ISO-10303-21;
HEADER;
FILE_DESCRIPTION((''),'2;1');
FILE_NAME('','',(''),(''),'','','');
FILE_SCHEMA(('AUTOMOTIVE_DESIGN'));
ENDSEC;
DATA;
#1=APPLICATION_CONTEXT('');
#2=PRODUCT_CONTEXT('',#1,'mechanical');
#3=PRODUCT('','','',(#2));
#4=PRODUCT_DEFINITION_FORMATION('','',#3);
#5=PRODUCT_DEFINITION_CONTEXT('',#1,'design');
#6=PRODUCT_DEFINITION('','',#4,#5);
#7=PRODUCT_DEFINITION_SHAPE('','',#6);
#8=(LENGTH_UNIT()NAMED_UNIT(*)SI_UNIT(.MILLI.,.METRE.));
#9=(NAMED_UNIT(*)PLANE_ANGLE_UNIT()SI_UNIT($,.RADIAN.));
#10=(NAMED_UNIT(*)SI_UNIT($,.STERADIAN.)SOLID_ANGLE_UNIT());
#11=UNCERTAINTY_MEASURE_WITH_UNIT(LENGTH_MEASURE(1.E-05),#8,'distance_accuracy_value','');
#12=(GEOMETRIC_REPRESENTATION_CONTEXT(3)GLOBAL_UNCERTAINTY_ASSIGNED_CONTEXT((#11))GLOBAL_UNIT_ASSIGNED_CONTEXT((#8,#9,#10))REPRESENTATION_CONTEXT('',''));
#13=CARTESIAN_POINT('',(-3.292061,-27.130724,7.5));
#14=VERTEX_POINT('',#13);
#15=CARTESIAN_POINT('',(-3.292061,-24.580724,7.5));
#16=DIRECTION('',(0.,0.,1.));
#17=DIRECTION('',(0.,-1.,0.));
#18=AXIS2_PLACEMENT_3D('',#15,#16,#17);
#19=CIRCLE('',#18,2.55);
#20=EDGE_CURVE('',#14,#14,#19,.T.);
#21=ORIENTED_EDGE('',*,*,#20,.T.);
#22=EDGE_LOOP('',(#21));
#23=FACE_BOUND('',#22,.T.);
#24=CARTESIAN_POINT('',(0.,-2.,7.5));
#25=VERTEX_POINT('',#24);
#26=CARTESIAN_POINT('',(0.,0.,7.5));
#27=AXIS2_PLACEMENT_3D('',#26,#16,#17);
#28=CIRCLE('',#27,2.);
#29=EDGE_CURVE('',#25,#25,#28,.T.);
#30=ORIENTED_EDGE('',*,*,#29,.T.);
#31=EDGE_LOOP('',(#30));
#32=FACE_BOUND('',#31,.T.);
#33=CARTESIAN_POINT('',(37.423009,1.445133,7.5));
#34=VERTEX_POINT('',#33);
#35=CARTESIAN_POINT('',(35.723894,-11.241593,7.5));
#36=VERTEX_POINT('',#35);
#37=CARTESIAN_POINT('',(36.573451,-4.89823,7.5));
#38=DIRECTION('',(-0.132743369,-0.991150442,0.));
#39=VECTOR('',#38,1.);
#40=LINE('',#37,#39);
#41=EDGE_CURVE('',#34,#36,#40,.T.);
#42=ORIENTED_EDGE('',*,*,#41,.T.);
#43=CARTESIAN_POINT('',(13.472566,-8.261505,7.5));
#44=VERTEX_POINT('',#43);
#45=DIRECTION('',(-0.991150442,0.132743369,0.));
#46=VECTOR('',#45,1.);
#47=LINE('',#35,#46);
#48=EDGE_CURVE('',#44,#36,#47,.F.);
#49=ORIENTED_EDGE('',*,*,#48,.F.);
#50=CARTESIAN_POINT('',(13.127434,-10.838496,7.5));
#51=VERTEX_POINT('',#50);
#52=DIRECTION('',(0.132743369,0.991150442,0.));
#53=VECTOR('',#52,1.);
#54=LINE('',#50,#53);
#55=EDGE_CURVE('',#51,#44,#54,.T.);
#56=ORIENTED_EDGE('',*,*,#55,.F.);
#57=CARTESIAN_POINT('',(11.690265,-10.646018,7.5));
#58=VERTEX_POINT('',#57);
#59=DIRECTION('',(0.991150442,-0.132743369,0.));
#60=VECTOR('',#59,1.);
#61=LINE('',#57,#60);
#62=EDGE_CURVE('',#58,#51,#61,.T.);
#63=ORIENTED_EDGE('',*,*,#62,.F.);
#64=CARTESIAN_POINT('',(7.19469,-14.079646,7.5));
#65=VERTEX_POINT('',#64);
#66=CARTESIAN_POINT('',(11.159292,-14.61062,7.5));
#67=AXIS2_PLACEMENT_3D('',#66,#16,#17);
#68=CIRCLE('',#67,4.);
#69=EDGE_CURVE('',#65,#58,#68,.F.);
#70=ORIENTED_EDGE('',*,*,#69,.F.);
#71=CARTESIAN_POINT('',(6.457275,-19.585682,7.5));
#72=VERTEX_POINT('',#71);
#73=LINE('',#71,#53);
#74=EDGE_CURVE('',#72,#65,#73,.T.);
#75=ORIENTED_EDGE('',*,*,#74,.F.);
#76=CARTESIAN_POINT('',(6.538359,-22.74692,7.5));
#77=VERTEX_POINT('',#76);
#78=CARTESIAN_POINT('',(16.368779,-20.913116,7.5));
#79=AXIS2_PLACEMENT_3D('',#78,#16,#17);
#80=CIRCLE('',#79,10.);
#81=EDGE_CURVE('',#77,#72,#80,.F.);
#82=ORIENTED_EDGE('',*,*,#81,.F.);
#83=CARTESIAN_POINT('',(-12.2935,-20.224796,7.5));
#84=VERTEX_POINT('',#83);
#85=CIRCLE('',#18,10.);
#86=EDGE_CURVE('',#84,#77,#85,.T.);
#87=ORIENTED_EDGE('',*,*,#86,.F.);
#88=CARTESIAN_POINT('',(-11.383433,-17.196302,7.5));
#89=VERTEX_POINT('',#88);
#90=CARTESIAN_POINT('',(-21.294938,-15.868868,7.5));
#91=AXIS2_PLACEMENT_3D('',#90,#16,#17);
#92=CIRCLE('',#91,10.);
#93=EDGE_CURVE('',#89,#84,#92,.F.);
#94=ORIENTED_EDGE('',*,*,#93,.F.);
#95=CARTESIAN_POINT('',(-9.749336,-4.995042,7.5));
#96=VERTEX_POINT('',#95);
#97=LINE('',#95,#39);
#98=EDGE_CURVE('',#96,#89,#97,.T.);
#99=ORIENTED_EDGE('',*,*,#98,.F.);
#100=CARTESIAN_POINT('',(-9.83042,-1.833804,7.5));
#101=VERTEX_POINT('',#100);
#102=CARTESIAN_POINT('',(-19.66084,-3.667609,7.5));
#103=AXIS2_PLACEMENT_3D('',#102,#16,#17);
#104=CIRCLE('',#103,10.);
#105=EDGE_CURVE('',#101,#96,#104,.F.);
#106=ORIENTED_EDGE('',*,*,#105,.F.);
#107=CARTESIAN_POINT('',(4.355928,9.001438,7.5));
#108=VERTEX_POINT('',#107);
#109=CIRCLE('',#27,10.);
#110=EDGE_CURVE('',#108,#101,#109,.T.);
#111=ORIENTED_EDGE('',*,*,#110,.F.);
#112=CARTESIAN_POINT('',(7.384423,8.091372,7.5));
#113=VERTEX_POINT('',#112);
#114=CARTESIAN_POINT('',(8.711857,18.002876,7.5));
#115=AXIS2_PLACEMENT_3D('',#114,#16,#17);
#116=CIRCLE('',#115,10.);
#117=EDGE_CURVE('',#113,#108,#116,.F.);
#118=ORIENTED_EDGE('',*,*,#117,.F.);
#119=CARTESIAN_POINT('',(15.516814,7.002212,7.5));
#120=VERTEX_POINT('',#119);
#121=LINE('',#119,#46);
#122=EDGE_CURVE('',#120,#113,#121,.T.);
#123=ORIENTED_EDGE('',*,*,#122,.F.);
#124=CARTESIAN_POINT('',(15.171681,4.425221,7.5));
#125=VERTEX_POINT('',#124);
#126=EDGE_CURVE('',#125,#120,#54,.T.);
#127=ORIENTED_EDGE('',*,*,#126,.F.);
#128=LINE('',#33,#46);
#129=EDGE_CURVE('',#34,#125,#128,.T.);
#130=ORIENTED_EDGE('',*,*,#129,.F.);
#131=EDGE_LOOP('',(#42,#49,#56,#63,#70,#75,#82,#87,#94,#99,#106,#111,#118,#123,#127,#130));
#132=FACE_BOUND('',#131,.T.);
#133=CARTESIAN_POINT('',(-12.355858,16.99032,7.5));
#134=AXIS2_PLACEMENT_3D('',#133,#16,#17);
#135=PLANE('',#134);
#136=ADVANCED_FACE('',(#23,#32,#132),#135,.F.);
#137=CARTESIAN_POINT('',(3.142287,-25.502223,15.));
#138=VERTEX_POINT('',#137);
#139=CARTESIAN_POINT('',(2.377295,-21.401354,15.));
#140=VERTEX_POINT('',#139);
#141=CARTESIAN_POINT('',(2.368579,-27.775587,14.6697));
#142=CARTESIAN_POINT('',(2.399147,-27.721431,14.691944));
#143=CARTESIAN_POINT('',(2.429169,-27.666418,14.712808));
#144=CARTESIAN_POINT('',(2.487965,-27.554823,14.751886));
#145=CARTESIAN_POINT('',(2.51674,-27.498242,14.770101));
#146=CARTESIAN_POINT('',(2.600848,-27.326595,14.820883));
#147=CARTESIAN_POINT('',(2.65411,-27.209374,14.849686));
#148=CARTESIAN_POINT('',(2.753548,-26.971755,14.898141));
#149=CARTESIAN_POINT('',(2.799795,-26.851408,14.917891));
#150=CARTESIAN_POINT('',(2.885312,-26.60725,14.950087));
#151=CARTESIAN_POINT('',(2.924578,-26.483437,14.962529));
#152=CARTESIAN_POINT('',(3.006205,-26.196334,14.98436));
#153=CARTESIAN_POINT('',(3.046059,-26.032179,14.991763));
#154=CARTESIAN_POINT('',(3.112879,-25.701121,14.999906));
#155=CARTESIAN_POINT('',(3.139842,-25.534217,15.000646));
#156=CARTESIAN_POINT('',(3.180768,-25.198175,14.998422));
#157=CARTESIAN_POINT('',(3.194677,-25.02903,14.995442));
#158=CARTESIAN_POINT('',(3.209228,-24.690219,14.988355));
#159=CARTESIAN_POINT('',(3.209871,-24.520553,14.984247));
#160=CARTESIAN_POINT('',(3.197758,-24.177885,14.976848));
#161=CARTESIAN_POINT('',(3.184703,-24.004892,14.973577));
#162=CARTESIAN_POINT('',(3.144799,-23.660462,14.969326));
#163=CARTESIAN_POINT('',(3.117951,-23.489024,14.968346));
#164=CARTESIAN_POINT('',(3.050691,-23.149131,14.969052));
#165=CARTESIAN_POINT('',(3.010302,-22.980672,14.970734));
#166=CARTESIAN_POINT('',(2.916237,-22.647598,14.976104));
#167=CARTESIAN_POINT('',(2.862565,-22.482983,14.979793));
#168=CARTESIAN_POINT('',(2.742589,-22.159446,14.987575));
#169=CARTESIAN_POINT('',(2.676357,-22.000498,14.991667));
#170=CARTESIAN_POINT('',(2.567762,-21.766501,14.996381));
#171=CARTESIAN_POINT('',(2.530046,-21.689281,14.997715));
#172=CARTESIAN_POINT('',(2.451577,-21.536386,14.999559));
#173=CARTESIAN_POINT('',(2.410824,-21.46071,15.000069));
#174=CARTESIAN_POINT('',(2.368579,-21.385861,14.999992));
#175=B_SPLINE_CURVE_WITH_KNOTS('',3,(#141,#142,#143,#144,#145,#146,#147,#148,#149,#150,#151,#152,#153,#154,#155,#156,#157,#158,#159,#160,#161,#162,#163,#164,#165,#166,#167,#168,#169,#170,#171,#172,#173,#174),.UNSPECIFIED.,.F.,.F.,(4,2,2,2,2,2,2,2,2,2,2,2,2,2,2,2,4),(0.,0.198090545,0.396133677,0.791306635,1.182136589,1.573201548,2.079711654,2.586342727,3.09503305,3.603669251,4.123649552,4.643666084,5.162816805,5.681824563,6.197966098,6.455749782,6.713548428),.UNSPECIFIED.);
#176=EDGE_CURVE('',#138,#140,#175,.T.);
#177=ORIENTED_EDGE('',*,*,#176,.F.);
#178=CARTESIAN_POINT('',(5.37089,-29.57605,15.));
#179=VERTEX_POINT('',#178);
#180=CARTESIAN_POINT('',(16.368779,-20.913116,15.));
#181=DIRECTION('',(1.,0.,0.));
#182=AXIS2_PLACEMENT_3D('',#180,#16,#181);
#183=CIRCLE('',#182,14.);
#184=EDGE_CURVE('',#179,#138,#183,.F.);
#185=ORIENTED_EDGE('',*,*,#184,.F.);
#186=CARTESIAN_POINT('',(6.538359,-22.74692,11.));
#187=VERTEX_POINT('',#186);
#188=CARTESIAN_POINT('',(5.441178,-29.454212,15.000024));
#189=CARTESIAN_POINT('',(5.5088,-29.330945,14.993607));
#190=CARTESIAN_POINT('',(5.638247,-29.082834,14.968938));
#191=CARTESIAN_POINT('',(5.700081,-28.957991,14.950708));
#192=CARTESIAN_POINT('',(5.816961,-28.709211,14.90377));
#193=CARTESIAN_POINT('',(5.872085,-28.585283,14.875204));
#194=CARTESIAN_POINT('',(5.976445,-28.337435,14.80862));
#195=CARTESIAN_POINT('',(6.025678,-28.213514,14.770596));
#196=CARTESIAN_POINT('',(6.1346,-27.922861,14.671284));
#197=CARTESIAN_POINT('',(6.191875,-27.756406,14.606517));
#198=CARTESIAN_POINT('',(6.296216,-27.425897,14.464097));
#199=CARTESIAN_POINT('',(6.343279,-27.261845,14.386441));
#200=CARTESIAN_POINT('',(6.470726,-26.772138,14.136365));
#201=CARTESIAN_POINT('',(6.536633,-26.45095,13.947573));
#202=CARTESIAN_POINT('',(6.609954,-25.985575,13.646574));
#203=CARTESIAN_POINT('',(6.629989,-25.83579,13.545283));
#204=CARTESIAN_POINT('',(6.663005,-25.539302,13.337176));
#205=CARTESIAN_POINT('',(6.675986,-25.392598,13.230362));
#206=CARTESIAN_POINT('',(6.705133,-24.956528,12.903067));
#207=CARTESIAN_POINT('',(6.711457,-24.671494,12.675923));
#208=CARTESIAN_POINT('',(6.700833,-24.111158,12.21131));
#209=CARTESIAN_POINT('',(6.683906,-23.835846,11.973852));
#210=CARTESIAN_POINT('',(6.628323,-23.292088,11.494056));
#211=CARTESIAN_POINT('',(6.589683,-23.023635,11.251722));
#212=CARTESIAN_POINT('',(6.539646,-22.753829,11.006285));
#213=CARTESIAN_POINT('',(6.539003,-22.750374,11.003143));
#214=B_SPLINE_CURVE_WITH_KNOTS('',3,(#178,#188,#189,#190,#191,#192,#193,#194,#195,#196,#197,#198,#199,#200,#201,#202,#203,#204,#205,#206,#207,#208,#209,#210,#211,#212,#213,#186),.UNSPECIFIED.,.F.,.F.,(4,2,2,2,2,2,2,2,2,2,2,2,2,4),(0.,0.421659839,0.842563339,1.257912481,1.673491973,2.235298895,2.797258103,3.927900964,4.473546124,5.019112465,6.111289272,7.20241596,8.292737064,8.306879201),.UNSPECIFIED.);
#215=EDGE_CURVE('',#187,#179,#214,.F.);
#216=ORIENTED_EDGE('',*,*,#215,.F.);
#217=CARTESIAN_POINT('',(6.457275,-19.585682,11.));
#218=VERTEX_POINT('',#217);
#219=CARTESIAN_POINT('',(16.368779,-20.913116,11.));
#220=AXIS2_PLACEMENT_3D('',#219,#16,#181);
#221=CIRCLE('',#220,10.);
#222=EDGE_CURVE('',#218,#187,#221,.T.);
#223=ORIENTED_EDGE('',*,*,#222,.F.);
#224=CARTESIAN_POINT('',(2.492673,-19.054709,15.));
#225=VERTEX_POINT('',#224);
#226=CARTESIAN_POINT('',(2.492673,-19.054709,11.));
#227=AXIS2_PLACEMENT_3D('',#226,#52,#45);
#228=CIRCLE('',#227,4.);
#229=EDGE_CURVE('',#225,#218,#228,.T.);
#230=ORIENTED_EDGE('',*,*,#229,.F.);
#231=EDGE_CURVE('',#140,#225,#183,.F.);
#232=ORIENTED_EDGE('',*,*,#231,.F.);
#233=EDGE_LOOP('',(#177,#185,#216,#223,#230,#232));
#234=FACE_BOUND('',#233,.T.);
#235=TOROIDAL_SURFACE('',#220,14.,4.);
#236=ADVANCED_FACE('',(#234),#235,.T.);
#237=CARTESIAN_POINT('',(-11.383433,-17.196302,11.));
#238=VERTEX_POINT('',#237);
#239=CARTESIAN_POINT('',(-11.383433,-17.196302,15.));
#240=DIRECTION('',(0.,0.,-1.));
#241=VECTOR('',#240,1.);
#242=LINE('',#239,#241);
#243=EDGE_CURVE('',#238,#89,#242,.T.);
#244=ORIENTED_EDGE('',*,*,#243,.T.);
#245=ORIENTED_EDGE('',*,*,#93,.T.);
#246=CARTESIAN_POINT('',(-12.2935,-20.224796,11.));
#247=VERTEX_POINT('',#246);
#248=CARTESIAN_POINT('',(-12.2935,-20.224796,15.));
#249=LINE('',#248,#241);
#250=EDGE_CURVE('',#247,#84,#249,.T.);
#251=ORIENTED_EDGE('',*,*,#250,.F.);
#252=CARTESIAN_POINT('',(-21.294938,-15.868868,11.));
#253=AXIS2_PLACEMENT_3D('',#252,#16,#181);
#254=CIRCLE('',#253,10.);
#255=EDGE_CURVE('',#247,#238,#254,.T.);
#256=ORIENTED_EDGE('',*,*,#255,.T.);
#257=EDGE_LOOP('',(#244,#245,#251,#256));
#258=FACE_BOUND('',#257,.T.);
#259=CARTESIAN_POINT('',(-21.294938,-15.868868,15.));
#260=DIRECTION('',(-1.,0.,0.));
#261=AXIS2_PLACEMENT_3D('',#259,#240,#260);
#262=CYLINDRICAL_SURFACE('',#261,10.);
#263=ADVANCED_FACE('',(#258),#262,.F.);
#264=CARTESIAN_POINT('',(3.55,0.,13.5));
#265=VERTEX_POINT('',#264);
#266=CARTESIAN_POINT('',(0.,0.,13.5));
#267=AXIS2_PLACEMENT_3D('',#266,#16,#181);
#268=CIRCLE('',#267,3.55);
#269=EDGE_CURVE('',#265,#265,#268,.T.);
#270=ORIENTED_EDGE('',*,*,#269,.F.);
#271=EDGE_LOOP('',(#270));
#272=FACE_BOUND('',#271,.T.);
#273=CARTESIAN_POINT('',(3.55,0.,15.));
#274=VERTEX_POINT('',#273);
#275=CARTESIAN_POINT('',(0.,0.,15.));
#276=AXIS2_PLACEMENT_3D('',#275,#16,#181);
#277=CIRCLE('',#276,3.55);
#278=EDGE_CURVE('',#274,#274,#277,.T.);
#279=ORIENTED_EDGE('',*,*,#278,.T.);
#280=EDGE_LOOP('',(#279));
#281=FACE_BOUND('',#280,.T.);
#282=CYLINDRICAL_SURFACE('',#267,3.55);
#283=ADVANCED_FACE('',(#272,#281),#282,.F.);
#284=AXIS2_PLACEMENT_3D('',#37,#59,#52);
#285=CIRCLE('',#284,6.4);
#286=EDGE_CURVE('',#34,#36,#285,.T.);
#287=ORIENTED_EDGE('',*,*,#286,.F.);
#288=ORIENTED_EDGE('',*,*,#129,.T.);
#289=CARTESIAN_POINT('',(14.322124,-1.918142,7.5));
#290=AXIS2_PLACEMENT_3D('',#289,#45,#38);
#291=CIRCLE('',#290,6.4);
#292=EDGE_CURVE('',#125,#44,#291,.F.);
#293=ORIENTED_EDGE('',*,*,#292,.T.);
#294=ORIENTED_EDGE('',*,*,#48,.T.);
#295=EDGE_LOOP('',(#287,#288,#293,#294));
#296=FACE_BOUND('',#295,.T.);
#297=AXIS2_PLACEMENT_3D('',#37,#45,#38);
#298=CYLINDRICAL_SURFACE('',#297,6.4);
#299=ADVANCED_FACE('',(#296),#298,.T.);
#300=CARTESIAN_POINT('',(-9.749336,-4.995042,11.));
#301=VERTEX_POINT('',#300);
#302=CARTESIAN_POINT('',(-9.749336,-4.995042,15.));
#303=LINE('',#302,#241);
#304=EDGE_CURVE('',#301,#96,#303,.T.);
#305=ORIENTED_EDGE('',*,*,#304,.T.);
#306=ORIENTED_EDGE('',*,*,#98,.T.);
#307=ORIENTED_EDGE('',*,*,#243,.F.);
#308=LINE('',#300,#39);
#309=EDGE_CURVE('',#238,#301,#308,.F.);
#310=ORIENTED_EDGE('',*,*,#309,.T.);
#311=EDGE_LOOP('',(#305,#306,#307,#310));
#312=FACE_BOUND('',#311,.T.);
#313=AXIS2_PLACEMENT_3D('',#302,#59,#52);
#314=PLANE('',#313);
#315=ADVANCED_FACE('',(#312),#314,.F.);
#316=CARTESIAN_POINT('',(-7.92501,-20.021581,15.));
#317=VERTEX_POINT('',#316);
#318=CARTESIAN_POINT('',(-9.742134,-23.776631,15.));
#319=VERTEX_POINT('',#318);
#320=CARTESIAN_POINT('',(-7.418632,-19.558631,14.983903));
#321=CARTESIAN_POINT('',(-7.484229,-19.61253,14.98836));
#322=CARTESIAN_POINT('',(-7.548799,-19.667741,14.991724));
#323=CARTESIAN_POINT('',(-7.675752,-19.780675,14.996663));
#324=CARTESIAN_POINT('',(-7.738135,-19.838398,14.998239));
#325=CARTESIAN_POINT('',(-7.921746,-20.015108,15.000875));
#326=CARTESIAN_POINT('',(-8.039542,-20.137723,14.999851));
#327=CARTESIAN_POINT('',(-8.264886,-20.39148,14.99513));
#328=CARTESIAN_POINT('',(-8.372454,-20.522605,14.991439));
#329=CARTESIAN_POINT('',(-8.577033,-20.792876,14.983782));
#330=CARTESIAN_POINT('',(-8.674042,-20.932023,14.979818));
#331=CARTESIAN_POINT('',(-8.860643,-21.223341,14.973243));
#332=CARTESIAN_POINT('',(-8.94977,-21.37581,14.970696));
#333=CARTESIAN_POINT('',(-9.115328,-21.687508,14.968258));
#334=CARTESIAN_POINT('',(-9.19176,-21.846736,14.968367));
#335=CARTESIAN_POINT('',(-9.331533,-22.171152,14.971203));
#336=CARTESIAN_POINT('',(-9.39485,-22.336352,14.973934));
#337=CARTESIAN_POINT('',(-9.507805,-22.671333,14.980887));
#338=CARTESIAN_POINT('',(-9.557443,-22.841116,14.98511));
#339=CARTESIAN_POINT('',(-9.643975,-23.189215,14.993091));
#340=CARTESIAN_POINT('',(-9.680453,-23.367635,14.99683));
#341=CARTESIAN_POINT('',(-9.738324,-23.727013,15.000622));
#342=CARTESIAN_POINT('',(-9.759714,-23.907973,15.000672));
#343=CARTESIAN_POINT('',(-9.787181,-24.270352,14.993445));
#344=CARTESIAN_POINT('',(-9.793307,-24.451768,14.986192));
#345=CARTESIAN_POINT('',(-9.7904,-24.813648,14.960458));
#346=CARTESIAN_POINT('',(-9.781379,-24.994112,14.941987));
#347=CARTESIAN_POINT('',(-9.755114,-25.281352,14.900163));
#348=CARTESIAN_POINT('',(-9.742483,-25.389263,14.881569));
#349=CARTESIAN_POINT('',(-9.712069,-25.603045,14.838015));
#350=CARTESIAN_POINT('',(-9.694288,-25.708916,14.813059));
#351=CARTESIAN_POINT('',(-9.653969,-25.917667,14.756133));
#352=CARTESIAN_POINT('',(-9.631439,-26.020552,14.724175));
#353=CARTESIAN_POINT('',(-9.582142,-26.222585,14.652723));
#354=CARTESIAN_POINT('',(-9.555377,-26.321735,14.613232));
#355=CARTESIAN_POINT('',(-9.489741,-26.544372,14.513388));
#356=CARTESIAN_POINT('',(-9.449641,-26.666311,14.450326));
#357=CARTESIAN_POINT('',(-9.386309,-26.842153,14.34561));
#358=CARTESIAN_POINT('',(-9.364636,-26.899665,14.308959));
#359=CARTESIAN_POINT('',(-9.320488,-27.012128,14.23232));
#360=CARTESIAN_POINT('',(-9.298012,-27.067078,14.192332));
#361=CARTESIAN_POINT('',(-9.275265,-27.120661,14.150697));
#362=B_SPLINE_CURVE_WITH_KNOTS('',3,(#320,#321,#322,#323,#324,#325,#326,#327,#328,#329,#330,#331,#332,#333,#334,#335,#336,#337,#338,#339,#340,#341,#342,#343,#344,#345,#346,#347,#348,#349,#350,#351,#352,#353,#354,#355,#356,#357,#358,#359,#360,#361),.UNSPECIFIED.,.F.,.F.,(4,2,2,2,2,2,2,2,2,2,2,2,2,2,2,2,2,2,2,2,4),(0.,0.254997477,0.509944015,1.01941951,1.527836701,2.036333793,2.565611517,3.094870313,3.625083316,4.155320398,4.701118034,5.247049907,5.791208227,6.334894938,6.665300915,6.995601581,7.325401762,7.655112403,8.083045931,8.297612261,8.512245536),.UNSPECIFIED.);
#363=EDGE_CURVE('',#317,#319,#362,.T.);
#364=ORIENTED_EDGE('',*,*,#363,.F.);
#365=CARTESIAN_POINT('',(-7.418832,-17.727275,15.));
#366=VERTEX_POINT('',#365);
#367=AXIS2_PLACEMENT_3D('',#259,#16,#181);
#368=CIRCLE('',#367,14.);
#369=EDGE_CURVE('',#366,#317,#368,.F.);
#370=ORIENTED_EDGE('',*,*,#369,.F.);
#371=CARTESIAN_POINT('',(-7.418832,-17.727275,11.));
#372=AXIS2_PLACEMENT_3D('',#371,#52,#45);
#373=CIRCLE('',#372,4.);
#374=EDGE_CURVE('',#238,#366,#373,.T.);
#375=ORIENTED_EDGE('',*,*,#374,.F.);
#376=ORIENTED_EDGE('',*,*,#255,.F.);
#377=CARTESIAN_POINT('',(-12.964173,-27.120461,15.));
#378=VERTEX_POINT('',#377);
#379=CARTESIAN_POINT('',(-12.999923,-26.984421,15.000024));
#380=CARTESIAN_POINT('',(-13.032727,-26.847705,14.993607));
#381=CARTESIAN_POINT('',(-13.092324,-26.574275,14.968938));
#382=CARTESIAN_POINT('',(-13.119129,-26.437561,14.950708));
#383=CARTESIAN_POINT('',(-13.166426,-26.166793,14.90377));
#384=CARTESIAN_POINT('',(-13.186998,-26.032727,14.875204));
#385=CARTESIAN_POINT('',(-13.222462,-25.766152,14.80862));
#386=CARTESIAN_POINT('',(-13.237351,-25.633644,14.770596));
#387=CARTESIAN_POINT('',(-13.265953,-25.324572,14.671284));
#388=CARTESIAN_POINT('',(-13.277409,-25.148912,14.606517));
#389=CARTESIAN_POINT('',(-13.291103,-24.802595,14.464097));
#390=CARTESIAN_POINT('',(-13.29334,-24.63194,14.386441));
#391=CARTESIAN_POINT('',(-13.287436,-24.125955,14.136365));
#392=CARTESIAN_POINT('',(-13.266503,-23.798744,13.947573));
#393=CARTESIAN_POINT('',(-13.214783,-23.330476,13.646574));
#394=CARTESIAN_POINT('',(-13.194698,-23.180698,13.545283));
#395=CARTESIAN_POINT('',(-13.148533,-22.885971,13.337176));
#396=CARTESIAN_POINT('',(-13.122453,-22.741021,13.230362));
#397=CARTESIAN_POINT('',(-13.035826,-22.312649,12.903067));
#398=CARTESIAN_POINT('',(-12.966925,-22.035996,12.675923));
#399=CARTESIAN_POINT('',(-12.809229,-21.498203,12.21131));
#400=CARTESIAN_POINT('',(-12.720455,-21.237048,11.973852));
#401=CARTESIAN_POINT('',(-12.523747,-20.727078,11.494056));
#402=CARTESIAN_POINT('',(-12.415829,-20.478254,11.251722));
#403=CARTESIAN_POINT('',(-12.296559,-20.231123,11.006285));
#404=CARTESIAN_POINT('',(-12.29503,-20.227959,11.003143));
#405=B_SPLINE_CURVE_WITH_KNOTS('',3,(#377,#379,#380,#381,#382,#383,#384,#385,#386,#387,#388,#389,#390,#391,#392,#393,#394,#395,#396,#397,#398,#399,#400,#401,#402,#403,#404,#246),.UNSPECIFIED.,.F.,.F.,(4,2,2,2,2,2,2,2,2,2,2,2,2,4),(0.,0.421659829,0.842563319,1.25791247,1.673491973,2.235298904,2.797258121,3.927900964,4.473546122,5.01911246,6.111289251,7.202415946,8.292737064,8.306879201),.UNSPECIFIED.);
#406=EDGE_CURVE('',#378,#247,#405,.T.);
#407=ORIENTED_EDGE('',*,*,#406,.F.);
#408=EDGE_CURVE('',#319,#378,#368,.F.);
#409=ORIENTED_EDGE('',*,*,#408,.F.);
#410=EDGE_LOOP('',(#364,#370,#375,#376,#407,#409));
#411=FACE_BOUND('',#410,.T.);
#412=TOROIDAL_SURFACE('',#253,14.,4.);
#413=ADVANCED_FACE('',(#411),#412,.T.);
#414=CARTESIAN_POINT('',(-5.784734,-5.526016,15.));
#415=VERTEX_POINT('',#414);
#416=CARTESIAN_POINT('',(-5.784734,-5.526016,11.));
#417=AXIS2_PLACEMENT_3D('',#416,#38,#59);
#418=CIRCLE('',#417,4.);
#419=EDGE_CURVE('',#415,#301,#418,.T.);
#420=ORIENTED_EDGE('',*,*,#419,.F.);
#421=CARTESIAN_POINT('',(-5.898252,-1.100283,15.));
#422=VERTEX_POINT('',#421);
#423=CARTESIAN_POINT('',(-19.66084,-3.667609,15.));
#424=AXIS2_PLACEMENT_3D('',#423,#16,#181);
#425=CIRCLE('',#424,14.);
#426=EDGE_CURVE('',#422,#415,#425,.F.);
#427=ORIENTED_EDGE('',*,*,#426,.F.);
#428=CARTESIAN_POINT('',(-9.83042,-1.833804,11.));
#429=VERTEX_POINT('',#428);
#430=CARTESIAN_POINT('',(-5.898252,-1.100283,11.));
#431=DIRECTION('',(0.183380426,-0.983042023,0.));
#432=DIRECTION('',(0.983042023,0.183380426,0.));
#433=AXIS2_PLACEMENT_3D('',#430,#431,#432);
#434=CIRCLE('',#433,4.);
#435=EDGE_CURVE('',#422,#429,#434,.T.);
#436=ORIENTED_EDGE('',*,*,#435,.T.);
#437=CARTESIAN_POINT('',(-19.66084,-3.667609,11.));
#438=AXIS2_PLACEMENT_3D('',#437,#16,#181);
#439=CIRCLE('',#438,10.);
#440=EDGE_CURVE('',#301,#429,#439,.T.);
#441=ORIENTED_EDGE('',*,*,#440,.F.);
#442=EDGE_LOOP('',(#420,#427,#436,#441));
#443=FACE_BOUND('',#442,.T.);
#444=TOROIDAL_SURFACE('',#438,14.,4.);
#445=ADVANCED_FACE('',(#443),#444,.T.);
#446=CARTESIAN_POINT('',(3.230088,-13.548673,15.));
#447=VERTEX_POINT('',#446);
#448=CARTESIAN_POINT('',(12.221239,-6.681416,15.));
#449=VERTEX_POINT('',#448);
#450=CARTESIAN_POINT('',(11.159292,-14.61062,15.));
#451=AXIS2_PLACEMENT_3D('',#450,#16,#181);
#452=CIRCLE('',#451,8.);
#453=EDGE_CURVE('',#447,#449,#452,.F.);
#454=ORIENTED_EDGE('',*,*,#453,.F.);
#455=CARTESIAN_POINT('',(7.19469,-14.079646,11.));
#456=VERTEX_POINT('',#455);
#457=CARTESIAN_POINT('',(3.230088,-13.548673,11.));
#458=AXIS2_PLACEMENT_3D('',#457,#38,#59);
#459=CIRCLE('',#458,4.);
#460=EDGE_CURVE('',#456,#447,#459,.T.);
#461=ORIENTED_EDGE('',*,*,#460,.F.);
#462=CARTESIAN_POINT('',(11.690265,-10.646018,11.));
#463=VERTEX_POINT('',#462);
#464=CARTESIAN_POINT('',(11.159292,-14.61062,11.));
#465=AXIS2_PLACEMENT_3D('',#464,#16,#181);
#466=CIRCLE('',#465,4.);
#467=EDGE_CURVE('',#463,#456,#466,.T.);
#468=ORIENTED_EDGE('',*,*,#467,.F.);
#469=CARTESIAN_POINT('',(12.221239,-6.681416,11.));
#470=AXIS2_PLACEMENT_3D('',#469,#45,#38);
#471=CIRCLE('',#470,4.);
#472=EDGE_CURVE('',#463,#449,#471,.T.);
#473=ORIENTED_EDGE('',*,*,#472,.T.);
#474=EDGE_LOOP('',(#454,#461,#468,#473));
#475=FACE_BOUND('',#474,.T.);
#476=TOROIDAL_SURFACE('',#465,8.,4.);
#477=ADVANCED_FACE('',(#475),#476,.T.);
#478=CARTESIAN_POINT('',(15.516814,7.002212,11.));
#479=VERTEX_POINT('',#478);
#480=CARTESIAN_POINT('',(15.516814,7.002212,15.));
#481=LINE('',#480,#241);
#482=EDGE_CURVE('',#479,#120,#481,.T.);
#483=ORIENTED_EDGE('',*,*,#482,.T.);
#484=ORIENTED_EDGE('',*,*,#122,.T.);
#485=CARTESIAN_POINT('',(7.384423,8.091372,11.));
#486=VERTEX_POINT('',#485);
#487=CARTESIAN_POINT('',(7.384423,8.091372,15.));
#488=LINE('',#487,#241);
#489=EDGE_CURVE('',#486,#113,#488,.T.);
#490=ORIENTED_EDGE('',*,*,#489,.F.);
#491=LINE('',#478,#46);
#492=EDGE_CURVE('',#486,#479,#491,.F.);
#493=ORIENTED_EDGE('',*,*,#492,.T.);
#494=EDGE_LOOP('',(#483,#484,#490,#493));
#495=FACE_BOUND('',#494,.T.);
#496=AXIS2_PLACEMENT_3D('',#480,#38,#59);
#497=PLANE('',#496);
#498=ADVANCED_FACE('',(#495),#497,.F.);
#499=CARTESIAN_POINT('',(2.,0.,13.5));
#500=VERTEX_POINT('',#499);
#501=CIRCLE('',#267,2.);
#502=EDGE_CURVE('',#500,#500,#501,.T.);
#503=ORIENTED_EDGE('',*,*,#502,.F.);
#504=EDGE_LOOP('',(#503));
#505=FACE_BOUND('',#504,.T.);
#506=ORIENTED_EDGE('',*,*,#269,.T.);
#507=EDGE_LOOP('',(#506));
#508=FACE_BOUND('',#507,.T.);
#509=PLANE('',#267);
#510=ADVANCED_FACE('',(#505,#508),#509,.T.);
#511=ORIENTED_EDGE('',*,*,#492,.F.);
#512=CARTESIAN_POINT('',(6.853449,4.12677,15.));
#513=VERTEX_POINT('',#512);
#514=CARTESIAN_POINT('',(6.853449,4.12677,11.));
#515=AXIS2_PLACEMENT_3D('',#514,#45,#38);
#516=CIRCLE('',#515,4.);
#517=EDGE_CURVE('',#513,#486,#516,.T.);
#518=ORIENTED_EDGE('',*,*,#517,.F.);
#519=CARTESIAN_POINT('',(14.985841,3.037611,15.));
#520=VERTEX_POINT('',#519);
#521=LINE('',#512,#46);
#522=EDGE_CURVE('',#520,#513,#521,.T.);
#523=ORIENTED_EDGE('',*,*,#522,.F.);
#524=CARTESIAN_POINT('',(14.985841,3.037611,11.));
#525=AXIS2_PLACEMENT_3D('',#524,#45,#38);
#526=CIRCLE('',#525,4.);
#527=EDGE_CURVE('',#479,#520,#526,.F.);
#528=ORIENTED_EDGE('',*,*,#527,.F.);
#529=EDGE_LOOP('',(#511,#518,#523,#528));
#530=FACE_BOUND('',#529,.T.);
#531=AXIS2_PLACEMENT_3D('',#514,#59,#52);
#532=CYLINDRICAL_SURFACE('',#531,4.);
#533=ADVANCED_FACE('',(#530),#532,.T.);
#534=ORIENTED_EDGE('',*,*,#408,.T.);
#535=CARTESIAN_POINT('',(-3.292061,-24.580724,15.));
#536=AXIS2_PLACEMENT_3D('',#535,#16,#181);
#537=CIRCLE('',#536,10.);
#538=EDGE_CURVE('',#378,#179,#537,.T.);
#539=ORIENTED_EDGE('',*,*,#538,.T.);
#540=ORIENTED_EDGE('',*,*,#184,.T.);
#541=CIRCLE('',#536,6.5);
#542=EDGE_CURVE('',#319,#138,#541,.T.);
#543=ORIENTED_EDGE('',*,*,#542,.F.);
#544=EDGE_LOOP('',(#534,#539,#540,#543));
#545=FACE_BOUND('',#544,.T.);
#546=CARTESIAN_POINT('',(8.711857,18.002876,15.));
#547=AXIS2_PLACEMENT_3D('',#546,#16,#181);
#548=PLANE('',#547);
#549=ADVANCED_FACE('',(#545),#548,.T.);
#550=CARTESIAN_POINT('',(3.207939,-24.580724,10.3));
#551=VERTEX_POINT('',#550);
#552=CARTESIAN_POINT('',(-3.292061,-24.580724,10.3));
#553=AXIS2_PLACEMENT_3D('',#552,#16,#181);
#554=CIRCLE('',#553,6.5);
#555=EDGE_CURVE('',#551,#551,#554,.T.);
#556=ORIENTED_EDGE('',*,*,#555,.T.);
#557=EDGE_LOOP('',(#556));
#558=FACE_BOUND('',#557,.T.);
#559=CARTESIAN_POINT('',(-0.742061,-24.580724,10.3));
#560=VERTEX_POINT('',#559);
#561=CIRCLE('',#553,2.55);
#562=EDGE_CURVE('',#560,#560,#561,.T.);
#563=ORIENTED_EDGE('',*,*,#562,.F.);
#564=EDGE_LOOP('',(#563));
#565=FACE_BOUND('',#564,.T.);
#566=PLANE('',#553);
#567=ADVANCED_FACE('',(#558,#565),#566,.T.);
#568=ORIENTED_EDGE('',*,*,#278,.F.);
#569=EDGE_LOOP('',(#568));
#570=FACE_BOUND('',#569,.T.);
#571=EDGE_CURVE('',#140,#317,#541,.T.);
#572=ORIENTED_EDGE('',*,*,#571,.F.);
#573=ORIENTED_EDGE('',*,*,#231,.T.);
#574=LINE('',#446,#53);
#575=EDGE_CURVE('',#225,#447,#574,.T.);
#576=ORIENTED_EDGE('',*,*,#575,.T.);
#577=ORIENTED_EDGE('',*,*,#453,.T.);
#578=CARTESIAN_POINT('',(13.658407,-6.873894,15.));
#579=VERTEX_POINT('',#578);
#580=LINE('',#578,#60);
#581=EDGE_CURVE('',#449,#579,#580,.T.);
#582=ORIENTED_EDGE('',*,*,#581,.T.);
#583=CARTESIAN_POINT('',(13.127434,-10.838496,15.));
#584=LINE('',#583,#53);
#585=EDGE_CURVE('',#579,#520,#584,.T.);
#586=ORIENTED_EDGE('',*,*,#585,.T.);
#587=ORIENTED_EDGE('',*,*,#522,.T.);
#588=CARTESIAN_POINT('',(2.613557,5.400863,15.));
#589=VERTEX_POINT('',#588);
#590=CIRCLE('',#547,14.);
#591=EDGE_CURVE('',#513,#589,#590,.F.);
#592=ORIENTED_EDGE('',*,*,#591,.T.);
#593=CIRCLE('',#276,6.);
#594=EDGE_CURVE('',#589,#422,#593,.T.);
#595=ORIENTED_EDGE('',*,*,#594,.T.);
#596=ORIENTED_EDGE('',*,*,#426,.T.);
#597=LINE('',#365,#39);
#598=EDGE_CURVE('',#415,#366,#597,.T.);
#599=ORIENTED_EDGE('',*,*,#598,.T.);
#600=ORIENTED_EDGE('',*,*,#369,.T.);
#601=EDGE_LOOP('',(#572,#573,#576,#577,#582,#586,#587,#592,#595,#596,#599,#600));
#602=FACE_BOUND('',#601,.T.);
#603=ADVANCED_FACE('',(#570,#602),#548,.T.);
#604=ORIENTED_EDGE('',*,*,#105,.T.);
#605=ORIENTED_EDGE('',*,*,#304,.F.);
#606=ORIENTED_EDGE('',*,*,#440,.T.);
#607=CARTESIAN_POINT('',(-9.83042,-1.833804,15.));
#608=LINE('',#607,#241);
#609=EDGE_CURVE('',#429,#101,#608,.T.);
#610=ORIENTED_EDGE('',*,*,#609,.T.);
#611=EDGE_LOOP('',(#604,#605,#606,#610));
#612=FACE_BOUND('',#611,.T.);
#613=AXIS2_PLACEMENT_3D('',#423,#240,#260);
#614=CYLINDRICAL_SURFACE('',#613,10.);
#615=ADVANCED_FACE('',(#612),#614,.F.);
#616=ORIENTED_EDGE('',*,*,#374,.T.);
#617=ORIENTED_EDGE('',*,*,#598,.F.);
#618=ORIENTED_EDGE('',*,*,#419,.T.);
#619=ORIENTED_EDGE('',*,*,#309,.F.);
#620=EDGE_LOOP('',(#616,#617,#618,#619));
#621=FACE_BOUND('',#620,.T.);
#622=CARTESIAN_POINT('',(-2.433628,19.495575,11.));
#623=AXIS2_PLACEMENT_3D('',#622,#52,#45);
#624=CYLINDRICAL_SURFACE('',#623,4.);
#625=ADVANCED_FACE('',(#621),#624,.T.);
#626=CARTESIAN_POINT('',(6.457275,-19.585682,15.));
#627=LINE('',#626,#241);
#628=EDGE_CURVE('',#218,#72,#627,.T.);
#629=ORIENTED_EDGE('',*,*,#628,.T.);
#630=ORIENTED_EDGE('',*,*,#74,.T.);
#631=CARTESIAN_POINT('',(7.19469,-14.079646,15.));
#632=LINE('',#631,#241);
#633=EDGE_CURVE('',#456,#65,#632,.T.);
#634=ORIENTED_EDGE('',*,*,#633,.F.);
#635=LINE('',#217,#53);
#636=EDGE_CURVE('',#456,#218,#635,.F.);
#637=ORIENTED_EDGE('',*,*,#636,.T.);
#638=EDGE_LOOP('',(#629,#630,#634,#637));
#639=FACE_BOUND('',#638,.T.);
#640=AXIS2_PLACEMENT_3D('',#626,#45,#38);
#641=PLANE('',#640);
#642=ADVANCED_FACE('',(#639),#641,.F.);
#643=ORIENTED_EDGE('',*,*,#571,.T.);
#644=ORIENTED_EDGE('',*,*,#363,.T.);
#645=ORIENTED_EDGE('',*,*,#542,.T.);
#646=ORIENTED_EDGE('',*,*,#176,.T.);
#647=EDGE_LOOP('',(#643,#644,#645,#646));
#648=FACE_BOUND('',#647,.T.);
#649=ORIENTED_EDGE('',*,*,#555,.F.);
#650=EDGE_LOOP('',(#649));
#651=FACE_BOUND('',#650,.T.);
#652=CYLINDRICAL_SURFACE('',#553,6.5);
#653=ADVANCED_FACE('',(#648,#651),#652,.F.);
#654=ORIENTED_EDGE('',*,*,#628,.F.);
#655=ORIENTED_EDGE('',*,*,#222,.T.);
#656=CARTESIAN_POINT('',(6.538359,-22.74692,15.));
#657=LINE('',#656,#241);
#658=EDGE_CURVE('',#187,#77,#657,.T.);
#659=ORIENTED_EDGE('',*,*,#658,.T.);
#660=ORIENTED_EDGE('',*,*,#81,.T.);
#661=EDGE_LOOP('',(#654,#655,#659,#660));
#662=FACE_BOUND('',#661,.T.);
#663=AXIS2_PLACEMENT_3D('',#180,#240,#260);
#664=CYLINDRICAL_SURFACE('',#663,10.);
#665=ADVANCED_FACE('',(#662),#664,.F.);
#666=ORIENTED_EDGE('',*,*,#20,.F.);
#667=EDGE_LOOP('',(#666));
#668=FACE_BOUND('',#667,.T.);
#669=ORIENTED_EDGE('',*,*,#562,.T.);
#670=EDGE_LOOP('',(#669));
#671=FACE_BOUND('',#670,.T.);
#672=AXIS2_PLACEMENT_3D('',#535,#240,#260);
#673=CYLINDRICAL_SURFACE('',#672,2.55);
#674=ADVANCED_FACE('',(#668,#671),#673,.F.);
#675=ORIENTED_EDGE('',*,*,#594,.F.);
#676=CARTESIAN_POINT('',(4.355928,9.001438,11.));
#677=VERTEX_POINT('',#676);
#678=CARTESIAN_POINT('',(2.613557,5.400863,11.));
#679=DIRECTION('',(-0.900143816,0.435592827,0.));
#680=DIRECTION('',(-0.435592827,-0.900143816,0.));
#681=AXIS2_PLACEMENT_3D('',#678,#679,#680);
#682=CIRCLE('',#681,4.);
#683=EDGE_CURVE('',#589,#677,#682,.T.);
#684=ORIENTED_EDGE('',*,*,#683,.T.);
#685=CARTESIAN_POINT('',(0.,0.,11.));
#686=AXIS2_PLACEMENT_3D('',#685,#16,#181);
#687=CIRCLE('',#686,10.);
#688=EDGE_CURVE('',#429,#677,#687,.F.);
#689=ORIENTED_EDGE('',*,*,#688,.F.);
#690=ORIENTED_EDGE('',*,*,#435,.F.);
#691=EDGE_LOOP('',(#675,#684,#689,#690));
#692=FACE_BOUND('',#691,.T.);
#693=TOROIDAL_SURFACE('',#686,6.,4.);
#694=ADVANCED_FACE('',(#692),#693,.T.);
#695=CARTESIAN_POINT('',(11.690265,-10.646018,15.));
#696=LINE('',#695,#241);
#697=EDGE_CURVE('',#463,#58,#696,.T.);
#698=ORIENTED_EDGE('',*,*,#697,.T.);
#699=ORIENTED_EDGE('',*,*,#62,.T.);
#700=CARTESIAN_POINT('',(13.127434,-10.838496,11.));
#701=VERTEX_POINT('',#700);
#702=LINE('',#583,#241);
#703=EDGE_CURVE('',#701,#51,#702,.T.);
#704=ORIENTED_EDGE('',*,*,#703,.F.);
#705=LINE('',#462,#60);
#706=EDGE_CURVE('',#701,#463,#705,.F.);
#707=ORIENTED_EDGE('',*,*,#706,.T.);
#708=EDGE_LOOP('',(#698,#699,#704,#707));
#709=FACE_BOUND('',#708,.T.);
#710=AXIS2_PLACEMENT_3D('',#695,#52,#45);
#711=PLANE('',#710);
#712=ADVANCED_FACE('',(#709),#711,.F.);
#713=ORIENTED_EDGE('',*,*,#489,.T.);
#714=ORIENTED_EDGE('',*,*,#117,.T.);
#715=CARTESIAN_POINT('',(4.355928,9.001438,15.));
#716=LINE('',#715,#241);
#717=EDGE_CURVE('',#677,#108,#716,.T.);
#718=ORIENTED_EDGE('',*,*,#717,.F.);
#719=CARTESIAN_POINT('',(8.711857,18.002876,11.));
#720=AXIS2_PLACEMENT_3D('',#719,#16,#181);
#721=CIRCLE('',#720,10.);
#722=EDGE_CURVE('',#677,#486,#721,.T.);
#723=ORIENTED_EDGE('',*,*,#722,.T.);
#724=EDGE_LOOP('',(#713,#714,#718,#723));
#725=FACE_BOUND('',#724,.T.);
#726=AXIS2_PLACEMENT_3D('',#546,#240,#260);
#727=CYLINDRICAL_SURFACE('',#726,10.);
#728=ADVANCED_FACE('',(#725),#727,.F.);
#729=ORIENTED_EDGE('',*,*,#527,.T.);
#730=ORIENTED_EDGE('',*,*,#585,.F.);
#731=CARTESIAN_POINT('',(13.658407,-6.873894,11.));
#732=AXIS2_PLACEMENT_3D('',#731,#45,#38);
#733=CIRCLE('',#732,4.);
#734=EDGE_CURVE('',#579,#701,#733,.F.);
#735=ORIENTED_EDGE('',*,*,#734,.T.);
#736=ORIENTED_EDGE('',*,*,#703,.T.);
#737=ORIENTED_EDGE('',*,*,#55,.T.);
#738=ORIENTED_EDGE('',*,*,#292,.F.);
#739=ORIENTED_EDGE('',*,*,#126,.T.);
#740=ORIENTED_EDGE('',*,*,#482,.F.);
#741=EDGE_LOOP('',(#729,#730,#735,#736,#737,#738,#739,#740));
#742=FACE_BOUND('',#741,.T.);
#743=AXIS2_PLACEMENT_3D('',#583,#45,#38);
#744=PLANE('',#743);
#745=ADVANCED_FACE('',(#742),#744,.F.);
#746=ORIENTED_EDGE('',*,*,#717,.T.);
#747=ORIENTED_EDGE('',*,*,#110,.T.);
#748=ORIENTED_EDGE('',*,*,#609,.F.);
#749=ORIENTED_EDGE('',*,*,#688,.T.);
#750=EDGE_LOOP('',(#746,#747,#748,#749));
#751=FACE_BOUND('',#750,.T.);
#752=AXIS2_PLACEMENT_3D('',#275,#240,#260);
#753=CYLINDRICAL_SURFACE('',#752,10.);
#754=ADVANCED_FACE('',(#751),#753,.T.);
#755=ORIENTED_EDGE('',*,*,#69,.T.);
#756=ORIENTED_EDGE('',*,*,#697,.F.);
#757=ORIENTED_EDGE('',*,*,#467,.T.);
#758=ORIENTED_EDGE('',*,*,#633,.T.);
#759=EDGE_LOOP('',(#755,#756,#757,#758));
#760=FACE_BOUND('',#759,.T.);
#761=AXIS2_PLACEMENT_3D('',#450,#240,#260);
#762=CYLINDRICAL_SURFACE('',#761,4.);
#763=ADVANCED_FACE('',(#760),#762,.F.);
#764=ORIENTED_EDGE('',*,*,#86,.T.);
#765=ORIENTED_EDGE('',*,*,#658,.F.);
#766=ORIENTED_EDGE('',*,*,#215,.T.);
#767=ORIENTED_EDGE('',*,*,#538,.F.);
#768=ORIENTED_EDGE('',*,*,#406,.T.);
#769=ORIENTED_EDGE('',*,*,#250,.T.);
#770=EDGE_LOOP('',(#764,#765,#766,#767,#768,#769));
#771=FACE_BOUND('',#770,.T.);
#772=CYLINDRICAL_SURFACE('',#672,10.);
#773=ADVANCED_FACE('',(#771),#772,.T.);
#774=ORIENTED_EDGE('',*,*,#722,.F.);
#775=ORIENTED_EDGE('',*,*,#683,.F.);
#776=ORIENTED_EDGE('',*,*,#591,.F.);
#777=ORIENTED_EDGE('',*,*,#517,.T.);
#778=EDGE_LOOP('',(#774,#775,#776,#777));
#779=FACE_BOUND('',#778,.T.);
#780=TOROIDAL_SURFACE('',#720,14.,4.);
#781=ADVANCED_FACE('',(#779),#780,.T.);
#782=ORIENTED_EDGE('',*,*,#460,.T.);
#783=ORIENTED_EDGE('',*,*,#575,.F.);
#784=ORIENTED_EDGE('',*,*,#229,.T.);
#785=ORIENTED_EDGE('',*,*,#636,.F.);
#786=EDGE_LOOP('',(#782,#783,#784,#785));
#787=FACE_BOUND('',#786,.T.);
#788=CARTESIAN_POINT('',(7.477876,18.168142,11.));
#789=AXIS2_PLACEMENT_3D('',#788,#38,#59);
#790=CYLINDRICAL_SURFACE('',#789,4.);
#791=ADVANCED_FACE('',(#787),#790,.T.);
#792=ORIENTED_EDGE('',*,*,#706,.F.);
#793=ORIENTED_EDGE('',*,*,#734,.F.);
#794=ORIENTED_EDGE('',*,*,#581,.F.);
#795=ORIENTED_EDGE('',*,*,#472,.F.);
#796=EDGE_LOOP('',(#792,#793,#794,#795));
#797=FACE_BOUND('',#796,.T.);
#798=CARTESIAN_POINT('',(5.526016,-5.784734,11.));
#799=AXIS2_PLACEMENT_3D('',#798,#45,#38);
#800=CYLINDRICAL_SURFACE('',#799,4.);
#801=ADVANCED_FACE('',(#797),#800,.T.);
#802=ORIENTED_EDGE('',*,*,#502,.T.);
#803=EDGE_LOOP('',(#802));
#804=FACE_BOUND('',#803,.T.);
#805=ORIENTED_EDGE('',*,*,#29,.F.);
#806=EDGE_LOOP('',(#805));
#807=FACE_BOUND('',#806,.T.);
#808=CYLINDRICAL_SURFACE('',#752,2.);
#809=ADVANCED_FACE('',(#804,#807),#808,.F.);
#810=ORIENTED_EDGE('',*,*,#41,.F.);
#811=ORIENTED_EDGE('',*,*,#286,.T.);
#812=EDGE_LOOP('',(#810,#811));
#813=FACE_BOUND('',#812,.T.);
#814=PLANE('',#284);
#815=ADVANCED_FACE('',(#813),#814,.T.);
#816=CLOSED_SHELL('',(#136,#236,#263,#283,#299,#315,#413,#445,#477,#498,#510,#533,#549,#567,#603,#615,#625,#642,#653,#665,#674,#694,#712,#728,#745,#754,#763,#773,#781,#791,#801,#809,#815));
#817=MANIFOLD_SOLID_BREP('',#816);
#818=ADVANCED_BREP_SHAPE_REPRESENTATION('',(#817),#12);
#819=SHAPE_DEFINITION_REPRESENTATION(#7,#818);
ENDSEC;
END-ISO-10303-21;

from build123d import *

# Parameters (mm, degrees)
SKETCH_5_R          = 2
SKETCH_5_R_2        = 2.55
EXTRUDE_3_DEPTH     = 15
FILLET_4_R          = 4
SKETCH_6_R          = 6.4
EXTRUDE_4_DEPTH     = 22.45
SKETCH_7_R          = 6.5
CUT_EXTRUDE_1_DEPTH = 4.7
CUT_EXTRUDE_START   = -4.7
SKETCH_8_R          = 6.5
CUT_EXTRUDE_2_DEPTH = 4.7
SKETCH_9_W          = 7.5
SKETCH_9_H          = 50
CUT_EXTRUDE_3_DEPTH = 60.938467095
SKETCH_10_R         = 3.55
CUT_EXTRUDE_4_DEPTH = 1.5


with BuildPart() as part:
    # 草图5 → 凸台-拉伸3 (new body)
    with BuildSketch(Plane.XY):
        with BuildLine():
            Line((15.516814201, 7.002212297), (7.384422843, 8.091371903))
            ThreePointArc((7.384422843, 8.091371903), (5.833974337, 8.425935573), (4.355928265, 9.00143816))
            ThreePointArc((4.355928265, 9.00143816), (-6.069854623, 7.947129347), (-9.830420232, -1.833804259))
            ThreePointArc((-9.830420232, -1.833804259), (-9.664128327, -3.411197812), (-9.749336047, -4.995042206))
            Line((-9.749336047, -4.995042206), (-11.383433357, -17.196301568))
            ThreePointArc((-11.383433357, -17.196301568), (-11.717997026, -18.746750074), (-12.293499614, -20.224796146))
            ThreePointArc((-12.293499614, -20.224796146), (-4.619495141, -34.492228828), (6.538358778, -22.746920152))
            ThreePointArc((6.538358778, -22.746920152), (6.372066873, -21.169526599), (6.457274593, -19.585682205))
            Line((6.457274593, -19.585682205), (7.194690182, -14.07964606))
            ThreePointArc((7.194690182, -14.07964606), (8.731350099, -11.431767797), (11.690265423, -10.646017769))
            Line((11.690265423, -10.646017769), (13.127433564, -10.838495653))
            Line((13.127433564, -10.838495653), (15.516814201, 7.002212297))
        make_face()
        Circle(SKETCH_5_R, mode=Mode.SUBTRACT)
        with Locations((-3.292061454, -24.580724411)):
            Circle(SKETCH_5_R_2, mode=Mode.SUBTRACT)
    extrude(amount=EXTRUDE_3_DEPTH)

    # 圆角4
    # the kernel refuses this fillet: 4 mm, written as the material it takes off along each edge
    with BuildSketch(Plane(origin=(-19.660840464, -3.667608519, 15), x_dir=(0.9830420232040514, 0.18338042593168238, 0), z_dir=(-0.18338042593168238, 0.9830420232040514, 0))) as fillet_4_piece_1:
        with BuildLine():
            CenterArc((10 + FILLET_4_R, FILLET_4_R), FILLET_4_R, 180, 90)
            Line((10 + FILLET_4_R, 0), (10, 0))
            Line((10, 0), (10, FILLET_4_R))
        make_face()
    revolve(axis=Axis((-19.660840464, -3.667608519, 15), (0, 0, -1)), revolution_arc=18.194872339, mode=Mode.SUBTRACT)
    with BuildSketch(Plane(origin=(25.428318618, 5.67477861, 0), x_dir=(0, 0, 1), z_dir=(-0.9911504416884656, 0.132743368726124, 0))) as fillet_4_piece_2:
        with BuildLine():
            CenterArc((FILLET_4_R, -FILLET_4_R), FILLET_4_R, 90, 90)
            Line((0, -FILLET_4_R), (0, 0))
            Line((0, 0), (FILLET_4_R, 0))
        make_face()
    extrude(amount=18.205002002, mode=Mode.SUBTRACT)
    with BuildSketch(Plane(origin=(11.690265423, -10.646017769, 0), x_dir=(0, 0, 1), z_dir=(0.9911504416883519, -0.13274336872697298, 0))) as fillet_4_piece_3:
        with BuildLine():
            CenterArc((FILLET_4_R, -FILLET_4_R), FILLET_4_R, 90, 90)
            Line((0, -FILLET_4_R), (0, 0))
            Line((0, 0), (FILLET_4_R, 0))
        make_face()
    extrude(amount=11.45, mode=Mode.SUBTRACT)
    with BuildSketch(Plane(origin=(11.159291948, -14.610619535, 0), x_dir=(-0.9911504416882816, 0.13274336872749704, 0), z_dir=(-0.13274336872749704, -0.9911504416882816, 0))) as fillet_4_piece_4:
        with BuildLine():
            CenterArc((4 + FILLET_4_R, -FILLET_4_R), FILLET_4_R, 90, 90)
            Line((4 + FILLET_4_R, 0), (4, 0))
            Line((4, 0), (4, -FILLET_4_R))
        make_face()
    revolve(axis=Axis((11.159291948, -14.610619535, 0), (0, 0, -1)), revolution_arc=90, mode=Mode.SUBTRACT)
    with BuildSketch(Plane(origin=(6.457274593, -19.585682205, 0), x_dir=(0, 0, 1), z_dir=(0.13274336872730183, 0.9911504416883078, 0))) as fillet_4_piece_5:
        with BuildLine():
            CenterArc((FILLET_4_R, -FILLET_4_R), FILLET_4_R, 90, 90)
            Line((0, -FILLET_4_R), (0, 0))
            Line((0, 0), (FILLET_4_R, 0))
        make_face()
    extrude(amount=5.555197186, mode=Mode.SUBTRACT)
    with BuildSketch(Plane(origin=(16.368779012, -20.913115892, 0), x_dir=(-0.3768153606688204, -0.9262883913576953, 0), z_dir=(0.9262883913576953, -0.3768153606688204, 0))) as fillet_4_piece_6:
        with BuildLine():
            CenterArc((10.000000001 + FILLET_4_R, -FILLET_4_R), FILLET_4_R, 90, 90)
            Line((10.000000001 + FILLET_4_R, 0), (10.000000001, 0))
            Line((10.000000001, 0), (10.000000001, -FILLET_4_R))
        make_face()
    revolve(axis=Axis((16.368779012, -20.913115892, 0), (0, 0, -1)), revolution_arc=75.491592277, mode=Mode.SUBTRACT)
    with BuildSketch(Plane(origin=(-9.749336047, -4.995042206, 15), x_dir=(0, 0, -1), z_dir=(-0.13274336872713738, -0.9911504416883298, 0))) as fillet_4_piece_7:
        with BuildLine():
            CenterArc((FILLET_4_R, FILLET_4_R), FILLET_4_R, 180, 90)
            Line((0, FILLET_4_R), (0, 0))
            Line((0, 0), (FILLET_4_R, 0))
        make_face()
    extrude(amount=12.310199188, mode=Mode.SUBTRACT)
    with BuildSketch(Plane(origin=(-21.294937774, -15.868867881, 0), x_dir=(0.9911504416879034, -0.132743368730321, 0), z_dir=(0.132743368730321, 0.9911504416879034, 0))) as fillet_4_piece_8:
        with BuildLine():
            CenterArc((10 + FILLET_4_R, -FILLET_4_R), FILLET_4_R, 90, 90)
            Line((10 + FILLET_4_R, 0), (10, 0))
            Line((10, 0), (10, -FILLET_4_R))
        make_face()
    revolve(axis=Axis((-21.294937774, -15.868867881, 0), (0, 0, -1)), revolution_arc=75.491592288, mode=Mode.SUBTRACT)
    with BuildSketch(Plane(origin=(-9.749336047, -4.995042206, 0), x_dir=(0, 0, 1), z_dir=(-0.13274336872713738, -0.9911504416883298, 0))) as fillet_4_piece_9:
        with BuildLine():
            CenterArc((FILLET_4_R, -FILLET_4_R), FILLET_4_R, 90, 90)
            Line((0, -FILLET_4_R), (0, 0))
            Line((0, 0), (FILLET_4_R, 0))
        make_face()
    extrude(amount=12.310199188, mode=Mode.SUBTRACT)
    with BuildSketch(Plane(origin=(-19.660840464, -3.667608519, 0), x_dir=(0.9830420232040514, 0.18338042593168238, 0), z_dir=(-0.18338042593168238, 0.9830420232040514, 0))) as fillet_4_piece_10:
        with BuildLine():
            CenterArc((10 + FILLET_4_R, -FILLET_4_R), FILLET_4_R, 90, 90)
            Line((10 + FILLET_4_R, 0), (10, 0))
            Line((10, 0), (10, -FILLET_4_R))
        make_face()
    revolve(axis=Axis((-19.660840464, -3.667608519, 0), (0, 0, -1)), revolution_arc=18.194872339, mode=Mode.SUBTRACT)
    with BuildSketch(Plane(origin=(0, 0, 0), x_dir=(0.43559282651439474, 0.900143816003421, 0), z_dir=(0.900143816003421, -0.43559282651439474, 0))) as fillet_4_piece_11:
        with BuildLine():
            CenterArc((10 - FILLET_4_R, FILLET_4_R), FILLET_4_R, 270, 90)
            Line((10 - FILLET_4_R, 0), (10, 0))
            Line((10, 0), (10, FILLET_4_R))
        make_face()
    revolve(axis=Axis((0, 0, 0), (0, 0, 1)), revolution_arc=126.389744678, mode=Mode.SUBTRACT)
    with BuildSketch(Plane(origin=(8.71185653, 18.00287632, 0), x_dir=(-0.13274336873032264, -0.9911504416879031, 0), z_dir=(0.9911504416879031, -0.13274336873032264, 0))) as fillet_4_piece_12:
        with BuildLine():
            CenterArc((10 + FILLET_4_R, -FILLET_4_R), FILLET_4_R, 90, 90)
            Line((10 + FILLET_4_R, 0), (10, 0))
            Line((10, 0), (10, -FILLET_4_R))
        make_face()
    revolve(axis=Axis((8.71185653, 18.00287632, 0), (0, 0, -1)), revolution_arc=18.194872339, mode=Mode.SUBTRACT)
    with BuildSketch(Plane(origin=(-21.294937774, -15.868867881, 15), x_dir=(0.9911504416879034, -0.132743368730321, 0), z_dir=(0.132743368730321, 0.9911504416879034, 0))) as fillet_4_piece_13:
        with BuildLine():
            CenterArc((10 + FILLET_4_R, FILLET_4_R), FILLET_4_R, 180, 90)
            Line((10 + FILLET_4_R, 0), (10, 0))
            Line((10, 0), (10, FILLET_4_R))
        make_face()
    revolve(axis=Axis((-21.294937774, -15.868867881, 15), (0, 0, -1)), revolution_arc=75.491592288, mode=Mode.SUBTRACT)
    with BuildSketch(Plane(origin=(16.368779012, -20.913115892, 15), x_dir=(-0.3768153606688204, -0.9262883913576953, 0), z_dir=(0.9262883913576953, -0.3768153606688204, 0))) as fillet_4_piece_14:
        with BuildLine():
            CenterArc((10.000000001 + FILLET_4_R, FILLET_4_R), FILLET_4_R, 180, 90)
            Line((10.000000001 + FILLET_4_R, 0), (10.000000001, 0))
            Line((10.000000001, 0), (10.000000001, FILLET_4_R))
        make_face()
    revolve(axis=Axis((16.368779012, -20.913115892, 15), (0, 0, -1)), revolution_arc=75.491592277, mode=Mode.SUBTRACT)
    with BuildSketch(Plane(origin=(6.457274593, -19.585682205, 15), x_dir=(0, 0, -1), z_dir=(0.13274336872730183, 0.9911504416883078, 0))) as fillet_4_piece_15:
        with BuildLine():
            CenterArc((FILLET_4_R, FILLET_4_R), FILLET_4_R, 180, 90)
            Line((0, FILLET_4_R), (0, 0))
            Line((0, 0), (FILLET_4_R, 0))
        make_face()
    extrude(amount=5.555197186, mode=Mode.SUBTRACT)
    with BuildSketch(Plane(origin=(11.159291948, -14.610619535, 15), x_dir=(-0.9911504416882816, 0.13274336872749704, 0), z_dir=(-0.13274336872749704, -0.9911504416882816, 0))) as fillet_4_piece_16:
        with BuildLine():
            CenterArc((4 + FILLET_4_R, FILLET_4_R), FILLET_4_R, 180, 90)
            Line((4 + FILLET_4_R, 0), (4, 0))
            Line((4, 0), (4, FILLET_4_R))
        make_face()
    revolve(axis=Axis((11.159291948, -14.610619535, 15), (0, 0, -1)), revolution_arc=90, mode=Mode.SUBTRACT)
    with BuildSketch(Plane(origin=(11.690265423, -10.646017769, 15), x_dir=(0, 0, -1), z_dir=(0.9911504416883519, -0.13274336872697298, 0))) as fillet_4_piece_17:
        with BuildLine():
            CenterArc((FILLET_4_R, FILLET_4_R), FILLET_4_R, 180, 90)
            Line((0, FILLET_4_R), (0, 0))
            Line((0, 0), (FILLET_4_R, 0))
        make_face()
    extrude(amount=11.45, mode=Mode.SUBTRACT)
    with BuildSketch(Plane(origin=(25.428318618, 5.67477861, 15), x_dir=(0, 0, -1), z_dir=(-0.9911504416884656, 0.132743368726124, 0))) as fillet_4_piece_18:
        with BuildLine():
            CenterArc((FILLET_4_R, FILLET_4_R), FILLET_4_R, 180, 90)
            Line((0, FILLET_4_R), (0, 0))
            Line((0, 0), (FILLET_4_R, 0))
        make_face()
    extrude(amount=18.205002002, mode=Mode.SUBTRACT)
    with BuildSketch(Plane(origin=(8.71185653, 18.00287632, 15), x_dir=(-0.13274336873032264, -0.9911504416879031, 0), z_dir=(0.9911504416879031, -0.13274336873032264, 0))) as fillet_4_piece_19:
        with BuildLine():
            CenterArc((10 + FILLET_4_R, FILLET_4_R), FILLET_4_R, 180, 90)
            Line((10 + FILLET_4_R, 0), (10, 0))
            Line((10, 0), (10, FILLET_4_R))
        make_face()
    revolve(axis=Axis((8.71185653, 18.00287632, 15), (0, 0, -1)), revolution_arc=18.194872339, mode=Mode.SUBTRACT)
    with BuildSketch(Plane(origin=(0, 0, 15), x_dir=(0.43559282651439474, 0.900143816003421, 0), z_dir=(0.900143816003421, -0.43559282651439474, 0))) as fillet_4_piece_20:
        with BuildLine():
            CenterArc((10 - FILLET_4_R, -FILLET_4_R), FILLET_4_R, 0, 90)
            Line((10 - FILLET_4_R, 0), (10, 0))
            Line((10, 0), (10, -FILLET_4_R))
        make_face()
    revolve(axis=Axis((0, 0, 15), (0, 0, 1)), revolution_arc=126.389744678, mode=Mode.SUBTRACT)

    # 草图6 → 凸台-拉伸4 (add)
    with BuildSketch(Plane(origin=(14.322123882, -1.918141678, 0), x_dir=(0, 0, -1), z_dir=(0.9911504416882867, -0.13274336872745984, 0))):
        with Locations(Location((-7.5, 0, 0), (0, 0, 270))):
            Circle(SKETCH_6_R)
    extrude(amount=EXTRUDE_4_DEPTH)

    # 草图7 → 切除-拉伸1 (cut)
    with BuildSketch(Plane.XY.offset(15)):
        with Locations((-3.292061454, -24.580724411)):
            Circle(SKETCH_7_R)
    extrude(amount=-CUT_EXTRUDE_1_DEPTH, mode=Mode.SUBTRACT)

    # 草图8 → 切除-拉伸2 (cut)
    with BuildSketch(Plane(origin=(0, 0, 0), x_dir=(-1, 0, 0), z_dir=(0, 0, -1)).offset(CUT_EXTRUDE_START)):
        with Locations(Location((3.292061454, -24.580724411, 0), (0, 0, 180))):
            Circle(SKETCH_8_R)
    extrude(amount=CUT_EXTRUDE_2_DEPTH, mode=Mode.SUBTRACT)

    # 草图9 → 切除-拉伸3 (cut, through all)
    with BuildSketch(Plane(origin=(36.573451298, -4.898230306, 0), x_dir=(0, 0, -1), z_dir=(0.9911504416882867, -0.13274336872745987, 0))):
        with Locations((-3.75, -9.800195184)):
            Rectangle(SKETCH_9_W, SKETCH_9_H)
    extrude(amount=-CUT_EXTRUDE_3_DEPTH, mode=Mode.SUBTRACT)

    # 草图10 → 切除-拉伸4 (cut)
    with BuildSketch(Plane.XY.offset(15)):
        Circle(SKETCH_10_R)
    extrude(amount=-CUT_EXTRUDE_4_DEPTH, mode=Mode.SUBTRACT)


solid = part.part
